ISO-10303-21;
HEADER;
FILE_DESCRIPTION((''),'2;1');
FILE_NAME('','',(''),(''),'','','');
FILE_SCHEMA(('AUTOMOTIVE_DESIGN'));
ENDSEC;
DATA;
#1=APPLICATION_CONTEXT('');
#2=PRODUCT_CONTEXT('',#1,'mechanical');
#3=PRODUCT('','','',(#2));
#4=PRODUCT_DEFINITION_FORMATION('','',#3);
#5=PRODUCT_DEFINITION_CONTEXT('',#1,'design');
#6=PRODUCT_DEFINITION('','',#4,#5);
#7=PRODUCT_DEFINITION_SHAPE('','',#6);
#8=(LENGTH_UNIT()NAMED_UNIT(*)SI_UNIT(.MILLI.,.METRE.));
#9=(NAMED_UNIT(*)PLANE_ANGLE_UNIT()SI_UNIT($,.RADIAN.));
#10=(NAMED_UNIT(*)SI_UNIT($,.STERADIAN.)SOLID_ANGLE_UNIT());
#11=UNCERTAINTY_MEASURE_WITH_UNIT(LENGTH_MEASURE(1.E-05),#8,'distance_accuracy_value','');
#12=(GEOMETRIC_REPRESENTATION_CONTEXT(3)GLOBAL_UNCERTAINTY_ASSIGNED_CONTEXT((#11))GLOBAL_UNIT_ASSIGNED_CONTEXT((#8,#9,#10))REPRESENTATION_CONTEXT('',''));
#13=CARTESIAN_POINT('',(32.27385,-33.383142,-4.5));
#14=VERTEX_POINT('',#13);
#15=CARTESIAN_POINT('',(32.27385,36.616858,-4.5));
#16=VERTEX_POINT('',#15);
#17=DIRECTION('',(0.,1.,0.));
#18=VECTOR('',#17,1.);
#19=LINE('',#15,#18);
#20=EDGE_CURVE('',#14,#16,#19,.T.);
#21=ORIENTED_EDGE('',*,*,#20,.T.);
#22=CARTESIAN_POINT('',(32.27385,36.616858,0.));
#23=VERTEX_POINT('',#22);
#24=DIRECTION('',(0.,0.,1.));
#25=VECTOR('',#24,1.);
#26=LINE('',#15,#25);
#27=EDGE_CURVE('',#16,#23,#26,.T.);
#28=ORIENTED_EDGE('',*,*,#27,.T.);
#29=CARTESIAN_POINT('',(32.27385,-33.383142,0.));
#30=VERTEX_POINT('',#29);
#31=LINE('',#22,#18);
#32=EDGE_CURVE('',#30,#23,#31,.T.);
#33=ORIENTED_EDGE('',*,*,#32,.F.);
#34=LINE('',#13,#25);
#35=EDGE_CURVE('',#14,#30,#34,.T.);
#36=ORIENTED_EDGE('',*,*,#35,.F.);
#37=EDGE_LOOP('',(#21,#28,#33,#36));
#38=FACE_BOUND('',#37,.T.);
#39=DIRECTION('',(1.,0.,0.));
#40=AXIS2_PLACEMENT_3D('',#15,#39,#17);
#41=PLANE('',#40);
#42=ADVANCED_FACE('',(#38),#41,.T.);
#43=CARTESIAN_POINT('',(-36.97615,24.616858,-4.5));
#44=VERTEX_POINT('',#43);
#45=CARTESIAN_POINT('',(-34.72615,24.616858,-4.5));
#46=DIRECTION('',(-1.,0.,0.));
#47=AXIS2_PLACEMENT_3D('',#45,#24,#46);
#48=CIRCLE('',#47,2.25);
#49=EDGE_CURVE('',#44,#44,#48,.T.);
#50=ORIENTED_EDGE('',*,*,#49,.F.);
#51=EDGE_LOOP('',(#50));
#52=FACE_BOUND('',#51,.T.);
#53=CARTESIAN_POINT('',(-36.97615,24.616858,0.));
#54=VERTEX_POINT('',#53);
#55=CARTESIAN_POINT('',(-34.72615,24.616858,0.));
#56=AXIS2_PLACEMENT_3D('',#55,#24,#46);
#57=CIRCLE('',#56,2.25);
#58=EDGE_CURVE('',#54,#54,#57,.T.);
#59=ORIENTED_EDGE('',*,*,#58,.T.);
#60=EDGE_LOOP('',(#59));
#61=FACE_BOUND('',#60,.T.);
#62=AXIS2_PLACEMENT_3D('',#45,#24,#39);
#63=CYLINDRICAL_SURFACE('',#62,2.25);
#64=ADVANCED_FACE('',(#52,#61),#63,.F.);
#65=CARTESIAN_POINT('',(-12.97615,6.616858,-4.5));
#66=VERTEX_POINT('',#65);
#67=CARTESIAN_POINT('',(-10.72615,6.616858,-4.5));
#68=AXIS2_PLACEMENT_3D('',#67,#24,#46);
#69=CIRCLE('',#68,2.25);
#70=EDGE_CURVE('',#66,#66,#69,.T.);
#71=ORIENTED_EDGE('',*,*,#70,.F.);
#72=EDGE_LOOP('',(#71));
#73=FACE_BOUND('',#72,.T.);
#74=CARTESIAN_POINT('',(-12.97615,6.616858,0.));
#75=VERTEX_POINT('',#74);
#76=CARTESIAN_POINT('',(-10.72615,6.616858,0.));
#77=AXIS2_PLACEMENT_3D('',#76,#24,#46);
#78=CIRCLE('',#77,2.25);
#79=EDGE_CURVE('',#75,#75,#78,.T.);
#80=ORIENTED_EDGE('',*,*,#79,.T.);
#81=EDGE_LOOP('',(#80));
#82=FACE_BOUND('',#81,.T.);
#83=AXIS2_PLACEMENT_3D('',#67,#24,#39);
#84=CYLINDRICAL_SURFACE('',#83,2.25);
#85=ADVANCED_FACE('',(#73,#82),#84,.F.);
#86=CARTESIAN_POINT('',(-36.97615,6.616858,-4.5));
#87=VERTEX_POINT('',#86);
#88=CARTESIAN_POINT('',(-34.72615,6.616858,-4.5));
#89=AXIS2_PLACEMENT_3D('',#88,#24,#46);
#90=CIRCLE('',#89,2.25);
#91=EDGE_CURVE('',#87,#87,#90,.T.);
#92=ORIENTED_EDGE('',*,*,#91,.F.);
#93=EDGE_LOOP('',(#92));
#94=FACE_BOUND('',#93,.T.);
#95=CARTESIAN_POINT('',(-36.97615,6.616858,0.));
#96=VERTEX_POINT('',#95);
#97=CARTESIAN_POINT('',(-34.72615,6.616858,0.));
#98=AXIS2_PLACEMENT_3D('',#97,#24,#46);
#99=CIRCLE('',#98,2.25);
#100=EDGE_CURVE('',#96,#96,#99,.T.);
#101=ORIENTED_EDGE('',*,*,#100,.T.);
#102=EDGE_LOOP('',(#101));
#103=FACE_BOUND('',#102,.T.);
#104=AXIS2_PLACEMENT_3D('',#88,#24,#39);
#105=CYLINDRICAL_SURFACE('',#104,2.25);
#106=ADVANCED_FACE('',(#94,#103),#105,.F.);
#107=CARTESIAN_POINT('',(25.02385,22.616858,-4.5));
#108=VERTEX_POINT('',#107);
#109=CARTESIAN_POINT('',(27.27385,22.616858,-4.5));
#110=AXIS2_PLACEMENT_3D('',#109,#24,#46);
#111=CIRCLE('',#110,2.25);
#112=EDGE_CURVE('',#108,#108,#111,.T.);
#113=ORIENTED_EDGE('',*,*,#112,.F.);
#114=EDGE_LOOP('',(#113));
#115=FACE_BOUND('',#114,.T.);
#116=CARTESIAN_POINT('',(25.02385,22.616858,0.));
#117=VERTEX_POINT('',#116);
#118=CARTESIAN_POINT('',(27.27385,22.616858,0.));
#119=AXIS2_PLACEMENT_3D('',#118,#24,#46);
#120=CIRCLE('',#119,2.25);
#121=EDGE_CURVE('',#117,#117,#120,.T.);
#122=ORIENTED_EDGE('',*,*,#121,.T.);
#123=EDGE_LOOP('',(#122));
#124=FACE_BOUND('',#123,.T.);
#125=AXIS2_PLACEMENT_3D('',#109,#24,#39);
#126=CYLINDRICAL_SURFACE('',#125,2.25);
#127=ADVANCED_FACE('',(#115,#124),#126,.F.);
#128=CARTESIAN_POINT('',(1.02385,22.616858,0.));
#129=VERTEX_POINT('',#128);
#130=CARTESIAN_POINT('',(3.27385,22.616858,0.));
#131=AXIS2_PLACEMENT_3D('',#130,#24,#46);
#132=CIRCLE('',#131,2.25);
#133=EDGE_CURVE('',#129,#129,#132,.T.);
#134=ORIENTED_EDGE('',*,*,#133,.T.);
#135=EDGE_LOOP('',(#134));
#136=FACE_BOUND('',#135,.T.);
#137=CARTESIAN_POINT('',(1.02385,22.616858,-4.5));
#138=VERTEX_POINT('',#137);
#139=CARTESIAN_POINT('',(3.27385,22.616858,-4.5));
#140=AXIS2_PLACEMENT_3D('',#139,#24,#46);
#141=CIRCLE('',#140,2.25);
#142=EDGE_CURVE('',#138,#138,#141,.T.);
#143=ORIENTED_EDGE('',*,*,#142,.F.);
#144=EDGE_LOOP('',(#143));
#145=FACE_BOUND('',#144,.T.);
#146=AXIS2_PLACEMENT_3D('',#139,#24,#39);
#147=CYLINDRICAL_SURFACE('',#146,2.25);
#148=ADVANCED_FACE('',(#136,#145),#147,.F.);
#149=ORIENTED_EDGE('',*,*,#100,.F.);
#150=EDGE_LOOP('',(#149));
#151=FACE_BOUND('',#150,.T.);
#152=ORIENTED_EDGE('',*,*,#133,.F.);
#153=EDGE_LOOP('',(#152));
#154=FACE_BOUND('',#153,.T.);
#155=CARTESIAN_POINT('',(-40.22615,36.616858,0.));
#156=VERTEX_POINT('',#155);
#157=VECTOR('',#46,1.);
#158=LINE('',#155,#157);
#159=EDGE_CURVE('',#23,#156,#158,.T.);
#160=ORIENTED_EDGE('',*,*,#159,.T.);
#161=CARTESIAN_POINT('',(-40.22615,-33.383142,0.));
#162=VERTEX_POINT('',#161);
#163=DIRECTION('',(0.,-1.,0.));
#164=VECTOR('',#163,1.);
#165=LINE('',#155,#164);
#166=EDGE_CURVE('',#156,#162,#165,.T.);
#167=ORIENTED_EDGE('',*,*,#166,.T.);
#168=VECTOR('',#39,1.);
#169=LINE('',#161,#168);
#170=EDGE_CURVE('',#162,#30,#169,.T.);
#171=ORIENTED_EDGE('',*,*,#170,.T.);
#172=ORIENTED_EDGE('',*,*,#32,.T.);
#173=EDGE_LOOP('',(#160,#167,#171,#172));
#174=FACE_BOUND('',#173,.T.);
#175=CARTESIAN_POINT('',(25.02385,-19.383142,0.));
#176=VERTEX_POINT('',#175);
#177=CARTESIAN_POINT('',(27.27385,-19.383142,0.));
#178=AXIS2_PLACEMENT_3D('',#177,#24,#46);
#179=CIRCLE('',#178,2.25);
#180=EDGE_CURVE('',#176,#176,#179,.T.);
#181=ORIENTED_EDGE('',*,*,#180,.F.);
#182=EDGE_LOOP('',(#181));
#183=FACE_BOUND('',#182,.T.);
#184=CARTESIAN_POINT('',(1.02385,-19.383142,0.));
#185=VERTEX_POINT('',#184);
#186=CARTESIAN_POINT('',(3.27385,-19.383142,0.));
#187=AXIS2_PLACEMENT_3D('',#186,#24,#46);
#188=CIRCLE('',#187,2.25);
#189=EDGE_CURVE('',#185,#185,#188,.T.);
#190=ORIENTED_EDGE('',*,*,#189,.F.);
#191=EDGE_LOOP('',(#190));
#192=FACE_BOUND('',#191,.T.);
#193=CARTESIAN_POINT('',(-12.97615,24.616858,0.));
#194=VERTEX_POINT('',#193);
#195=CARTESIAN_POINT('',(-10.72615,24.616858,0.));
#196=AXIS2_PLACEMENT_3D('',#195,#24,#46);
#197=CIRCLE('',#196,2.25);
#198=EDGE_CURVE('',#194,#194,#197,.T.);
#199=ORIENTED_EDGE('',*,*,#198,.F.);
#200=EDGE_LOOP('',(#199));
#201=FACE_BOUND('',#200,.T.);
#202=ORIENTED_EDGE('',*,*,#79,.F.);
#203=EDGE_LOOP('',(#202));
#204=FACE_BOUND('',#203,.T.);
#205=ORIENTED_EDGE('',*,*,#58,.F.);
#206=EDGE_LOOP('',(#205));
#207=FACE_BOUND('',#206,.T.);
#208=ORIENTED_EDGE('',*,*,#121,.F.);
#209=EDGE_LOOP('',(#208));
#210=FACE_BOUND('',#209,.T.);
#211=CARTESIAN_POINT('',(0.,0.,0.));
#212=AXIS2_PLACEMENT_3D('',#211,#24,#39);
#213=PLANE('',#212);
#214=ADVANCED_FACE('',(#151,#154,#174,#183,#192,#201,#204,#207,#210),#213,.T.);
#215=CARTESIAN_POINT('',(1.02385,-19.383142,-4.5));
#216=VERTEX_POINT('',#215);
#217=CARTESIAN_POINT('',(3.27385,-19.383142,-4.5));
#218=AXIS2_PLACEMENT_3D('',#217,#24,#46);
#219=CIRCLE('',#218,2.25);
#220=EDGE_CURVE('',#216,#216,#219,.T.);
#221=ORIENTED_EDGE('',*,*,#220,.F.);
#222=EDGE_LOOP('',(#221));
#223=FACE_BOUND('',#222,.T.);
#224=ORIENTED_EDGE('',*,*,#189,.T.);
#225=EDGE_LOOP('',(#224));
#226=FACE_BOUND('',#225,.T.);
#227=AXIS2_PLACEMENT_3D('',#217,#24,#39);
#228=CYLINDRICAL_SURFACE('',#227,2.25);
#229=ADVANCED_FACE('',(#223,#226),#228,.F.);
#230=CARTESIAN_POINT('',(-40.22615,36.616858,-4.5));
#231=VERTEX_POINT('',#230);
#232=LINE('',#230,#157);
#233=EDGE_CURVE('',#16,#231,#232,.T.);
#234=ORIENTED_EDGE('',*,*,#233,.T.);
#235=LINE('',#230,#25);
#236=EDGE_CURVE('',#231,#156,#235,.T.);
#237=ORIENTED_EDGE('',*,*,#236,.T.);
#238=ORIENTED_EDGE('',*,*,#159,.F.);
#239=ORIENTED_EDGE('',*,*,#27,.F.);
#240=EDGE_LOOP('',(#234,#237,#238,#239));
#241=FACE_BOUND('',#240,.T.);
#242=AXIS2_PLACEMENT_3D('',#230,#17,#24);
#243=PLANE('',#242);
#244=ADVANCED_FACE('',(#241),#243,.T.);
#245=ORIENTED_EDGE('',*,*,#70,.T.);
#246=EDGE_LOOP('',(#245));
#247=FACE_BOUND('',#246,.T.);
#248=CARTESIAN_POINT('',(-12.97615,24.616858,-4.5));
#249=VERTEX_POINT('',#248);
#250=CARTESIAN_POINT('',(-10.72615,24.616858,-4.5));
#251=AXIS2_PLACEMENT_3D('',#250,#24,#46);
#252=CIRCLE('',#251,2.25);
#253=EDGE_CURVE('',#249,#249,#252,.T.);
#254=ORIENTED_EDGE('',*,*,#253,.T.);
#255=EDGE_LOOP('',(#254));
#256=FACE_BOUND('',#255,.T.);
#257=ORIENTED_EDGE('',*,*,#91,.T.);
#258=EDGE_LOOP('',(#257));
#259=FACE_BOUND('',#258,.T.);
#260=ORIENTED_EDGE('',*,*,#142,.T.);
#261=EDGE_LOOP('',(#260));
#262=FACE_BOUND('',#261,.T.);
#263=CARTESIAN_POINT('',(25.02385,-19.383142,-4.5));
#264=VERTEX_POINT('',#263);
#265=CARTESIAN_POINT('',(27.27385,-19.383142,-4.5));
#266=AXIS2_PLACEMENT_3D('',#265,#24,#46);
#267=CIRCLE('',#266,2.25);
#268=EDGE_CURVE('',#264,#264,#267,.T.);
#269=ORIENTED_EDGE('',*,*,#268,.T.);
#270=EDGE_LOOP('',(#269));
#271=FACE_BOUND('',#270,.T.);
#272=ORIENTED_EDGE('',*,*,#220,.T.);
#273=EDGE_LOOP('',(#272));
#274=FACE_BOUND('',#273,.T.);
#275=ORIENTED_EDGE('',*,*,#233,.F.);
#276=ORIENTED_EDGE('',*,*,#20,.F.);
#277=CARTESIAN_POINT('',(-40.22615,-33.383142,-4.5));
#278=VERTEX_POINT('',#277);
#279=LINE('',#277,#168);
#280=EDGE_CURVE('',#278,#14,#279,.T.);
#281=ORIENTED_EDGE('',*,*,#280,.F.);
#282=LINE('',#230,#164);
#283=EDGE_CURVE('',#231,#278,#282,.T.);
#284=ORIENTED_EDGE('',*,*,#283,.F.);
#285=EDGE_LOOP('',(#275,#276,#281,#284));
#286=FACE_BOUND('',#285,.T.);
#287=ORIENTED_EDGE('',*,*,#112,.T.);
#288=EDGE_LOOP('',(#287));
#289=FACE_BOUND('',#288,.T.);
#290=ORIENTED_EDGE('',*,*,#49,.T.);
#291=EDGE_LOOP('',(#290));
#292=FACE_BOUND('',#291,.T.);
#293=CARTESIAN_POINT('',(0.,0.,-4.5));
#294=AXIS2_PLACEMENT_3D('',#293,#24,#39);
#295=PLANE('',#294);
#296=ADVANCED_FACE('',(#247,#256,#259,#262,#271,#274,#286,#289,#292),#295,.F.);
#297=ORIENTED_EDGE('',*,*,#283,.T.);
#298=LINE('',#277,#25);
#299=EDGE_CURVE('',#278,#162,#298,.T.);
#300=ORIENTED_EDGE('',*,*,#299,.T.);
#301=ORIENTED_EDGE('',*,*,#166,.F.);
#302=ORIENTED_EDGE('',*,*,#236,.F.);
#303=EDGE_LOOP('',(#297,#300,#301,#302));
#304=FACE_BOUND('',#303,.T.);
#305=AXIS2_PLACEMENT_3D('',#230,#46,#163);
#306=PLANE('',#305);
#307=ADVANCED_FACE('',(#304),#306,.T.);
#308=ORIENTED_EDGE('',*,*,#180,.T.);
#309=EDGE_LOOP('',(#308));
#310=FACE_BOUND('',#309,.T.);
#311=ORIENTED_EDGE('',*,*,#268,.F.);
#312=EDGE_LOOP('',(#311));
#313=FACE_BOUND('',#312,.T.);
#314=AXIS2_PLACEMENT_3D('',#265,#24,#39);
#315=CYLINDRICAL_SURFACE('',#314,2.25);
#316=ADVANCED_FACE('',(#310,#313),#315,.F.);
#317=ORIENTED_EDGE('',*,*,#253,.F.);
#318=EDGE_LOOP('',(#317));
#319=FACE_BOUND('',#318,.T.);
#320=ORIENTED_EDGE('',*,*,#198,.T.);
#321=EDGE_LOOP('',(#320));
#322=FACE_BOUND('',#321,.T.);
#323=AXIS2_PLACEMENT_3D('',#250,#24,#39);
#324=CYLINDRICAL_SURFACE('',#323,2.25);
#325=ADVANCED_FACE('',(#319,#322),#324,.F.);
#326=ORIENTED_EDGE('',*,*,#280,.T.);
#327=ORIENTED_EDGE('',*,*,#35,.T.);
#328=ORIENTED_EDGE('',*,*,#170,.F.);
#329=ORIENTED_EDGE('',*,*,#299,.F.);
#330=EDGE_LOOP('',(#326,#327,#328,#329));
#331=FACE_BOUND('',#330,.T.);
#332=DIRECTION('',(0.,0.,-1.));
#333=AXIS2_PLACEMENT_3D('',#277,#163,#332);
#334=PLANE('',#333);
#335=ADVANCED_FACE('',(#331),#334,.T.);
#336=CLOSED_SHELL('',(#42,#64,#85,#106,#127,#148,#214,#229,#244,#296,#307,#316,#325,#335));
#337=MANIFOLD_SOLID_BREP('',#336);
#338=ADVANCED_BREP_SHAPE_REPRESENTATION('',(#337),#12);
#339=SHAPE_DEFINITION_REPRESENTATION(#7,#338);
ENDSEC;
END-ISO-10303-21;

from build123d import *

# Parameters (mm, degrees)
SKETCH1_W          = 72.5
SKETCH1_H          = 70
SKETCH1_R          = 2.25
BASE_FLANGE1_DEPTH = 4.5


# Sheet-metal steps are written as plain solids
with BuildPart() as part:
    # Sketch1 → Base-Flange1 (new body)
    with BuildSketch(Plane.XY):
        with Locations((-3.976149958, 1.616858374)):
            Rectangle(SKETCH1_W, SKETCH1_H)
        with Locations(Location((-34.726149958, 24.616858374, 0), (0, 0, 180))):
            Circle(SKETCH1_R, mode=Mode.SUBTRACT)
        with Locations(Location((-10.726149958, 24.616858374, 0), (0, 0, 180))):
            Circle(SKETCH1_R, mode=Mode.SUBTRACT)
        with Locations(Location((-10.726149958, 6.616858374, 0), (0, 0, 180))):
            Circle(SKETCH1_R, mode=Mode.SUBTRACT)
        with Locations(Location((-34.726149958, 6.616858374, 0), (0, 0, 180))):
            Circle(SKETCH1_R, mode=Mode.SUBTRACT)
        with Locations(Location((3.273850042, -19.383141626, 0), (0, 0, 180))):
            Circle(SKETCH1_R, mode=Mode.SUBTRACT)
        with Locations(Location((3.273850042, 22.616858374, 0), (0, 0, 180))):
            Circle(SKETCH1_R, mode=Mode.SUBTRACT)
        with Locations(Location((27.273850042, -19.383141626, 0), (0, 0, 180))):
            Circle(SKETCH1_R, mode=Mode.SUBTRACT)
        with Locations(Location((27.273850042, 22.616858374, 0), (0, 0, 180))):
            Circle(SKETCH1_R, mode=Mode.SUBTRACT)
    extrude(amount=-BASE_FLANGE1_DEPTH)


solid = part.part
